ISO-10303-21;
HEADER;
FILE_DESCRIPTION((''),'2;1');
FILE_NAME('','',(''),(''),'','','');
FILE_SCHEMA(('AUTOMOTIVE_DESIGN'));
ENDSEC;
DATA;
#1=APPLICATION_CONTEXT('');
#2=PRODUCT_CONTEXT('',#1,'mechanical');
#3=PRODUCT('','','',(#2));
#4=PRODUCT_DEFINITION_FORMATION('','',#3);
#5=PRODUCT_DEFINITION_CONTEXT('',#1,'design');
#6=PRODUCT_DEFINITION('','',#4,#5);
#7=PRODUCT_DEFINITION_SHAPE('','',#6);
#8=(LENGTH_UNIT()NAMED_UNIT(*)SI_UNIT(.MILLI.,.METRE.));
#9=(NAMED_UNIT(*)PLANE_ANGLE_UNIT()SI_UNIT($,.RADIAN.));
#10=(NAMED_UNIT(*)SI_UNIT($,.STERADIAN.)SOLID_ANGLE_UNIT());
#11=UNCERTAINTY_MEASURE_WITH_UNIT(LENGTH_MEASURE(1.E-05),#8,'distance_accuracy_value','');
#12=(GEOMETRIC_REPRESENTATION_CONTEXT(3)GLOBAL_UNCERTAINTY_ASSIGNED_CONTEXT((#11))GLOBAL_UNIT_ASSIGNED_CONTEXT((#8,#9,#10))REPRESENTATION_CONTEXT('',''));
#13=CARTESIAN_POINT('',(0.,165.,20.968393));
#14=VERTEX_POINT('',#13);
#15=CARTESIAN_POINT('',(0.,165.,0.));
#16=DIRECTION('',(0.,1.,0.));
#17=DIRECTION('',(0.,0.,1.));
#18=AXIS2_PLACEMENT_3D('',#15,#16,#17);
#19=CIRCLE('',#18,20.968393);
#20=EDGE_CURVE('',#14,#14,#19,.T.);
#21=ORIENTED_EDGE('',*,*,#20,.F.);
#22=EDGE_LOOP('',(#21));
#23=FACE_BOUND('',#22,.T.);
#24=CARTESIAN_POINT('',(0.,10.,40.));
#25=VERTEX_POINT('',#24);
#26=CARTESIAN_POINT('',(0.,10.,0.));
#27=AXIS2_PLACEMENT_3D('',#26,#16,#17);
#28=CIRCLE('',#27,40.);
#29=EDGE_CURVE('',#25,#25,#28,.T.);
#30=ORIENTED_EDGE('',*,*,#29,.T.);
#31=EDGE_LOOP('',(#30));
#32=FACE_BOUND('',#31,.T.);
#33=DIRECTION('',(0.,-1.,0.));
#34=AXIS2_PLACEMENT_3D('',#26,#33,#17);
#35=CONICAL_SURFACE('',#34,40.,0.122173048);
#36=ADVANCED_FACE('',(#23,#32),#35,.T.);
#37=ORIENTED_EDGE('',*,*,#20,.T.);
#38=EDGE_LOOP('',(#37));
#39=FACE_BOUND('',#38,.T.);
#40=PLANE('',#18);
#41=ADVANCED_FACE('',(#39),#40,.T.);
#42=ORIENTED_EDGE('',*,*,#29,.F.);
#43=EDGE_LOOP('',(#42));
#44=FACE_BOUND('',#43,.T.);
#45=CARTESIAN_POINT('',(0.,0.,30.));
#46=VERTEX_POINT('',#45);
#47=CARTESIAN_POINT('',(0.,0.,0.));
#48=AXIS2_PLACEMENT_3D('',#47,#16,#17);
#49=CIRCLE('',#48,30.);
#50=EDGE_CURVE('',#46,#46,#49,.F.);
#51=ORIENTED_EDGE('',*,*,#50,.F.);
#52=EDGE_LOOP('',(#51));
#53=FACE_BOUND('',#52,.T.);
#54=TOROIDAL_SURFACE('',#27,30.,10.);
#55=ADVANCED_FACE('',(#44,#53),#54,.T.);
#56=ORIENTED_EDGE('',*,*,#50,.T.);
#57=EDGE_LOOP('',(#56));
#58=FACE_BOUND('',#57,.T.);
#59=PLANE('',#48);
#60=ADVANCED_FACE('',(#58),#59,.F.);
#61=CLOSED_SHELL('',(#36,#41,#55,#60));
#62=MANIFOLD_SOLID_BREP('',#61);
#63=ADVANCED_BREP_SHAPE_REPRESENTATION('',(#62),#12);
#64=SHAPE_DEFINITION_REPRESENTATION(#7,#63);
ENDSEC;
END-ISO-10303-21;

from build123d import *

# Parameters (mm, degrees)
SKETCH2_R           = 40
BOSS_EXTRUDE2_DEPTH = 10
SKETCH3_R           = 40
BOSS_EXTRUDE4_DEPTH = 155
BOSS_EXTRUDE4_TAPER = 7
FILLET4_R           = 10


with BuildPart() as part:
    # Sketch2 → Boss-Extrude2 (new body)
    with BuildSketch(Plane(origin=(0, 0, 0), x_dir=(1, 0, 0), z_dir=(0, 1, 0))):
        with Locations(Location((0, 0, 0), (0, 0, 270))):
            Circle(SKETCH2_R)
    extrude(amount=BOSS_EXTRUDE2_DEPTH)

    # Sketch3 → Boss-Extrude4 (add)
    with BuildSketch(Plane(origin=(0, 10, 0), x_dir=(1, 0, 0), z_dir=(0, 1, 0))):
        with Locations(Location((0, 0, 0), (0, 0, 270))):
            Circle(SKETCH3_R)
    extrude(amount=BOSS_EXTRUDE4_DEPTH, taper=BOSS_EXTRUDE4_TAPER)

    # Fillet4
    fillet4_edges = [part.edges().sort_by_distance(p)[0] for p in [
        (0, 0, -40),
    ]]
    fillet(fillet4_edges, radius=FILLET4_R - 0.0001)  # a hair under: the kernel refuses the full size


solid = part.part
